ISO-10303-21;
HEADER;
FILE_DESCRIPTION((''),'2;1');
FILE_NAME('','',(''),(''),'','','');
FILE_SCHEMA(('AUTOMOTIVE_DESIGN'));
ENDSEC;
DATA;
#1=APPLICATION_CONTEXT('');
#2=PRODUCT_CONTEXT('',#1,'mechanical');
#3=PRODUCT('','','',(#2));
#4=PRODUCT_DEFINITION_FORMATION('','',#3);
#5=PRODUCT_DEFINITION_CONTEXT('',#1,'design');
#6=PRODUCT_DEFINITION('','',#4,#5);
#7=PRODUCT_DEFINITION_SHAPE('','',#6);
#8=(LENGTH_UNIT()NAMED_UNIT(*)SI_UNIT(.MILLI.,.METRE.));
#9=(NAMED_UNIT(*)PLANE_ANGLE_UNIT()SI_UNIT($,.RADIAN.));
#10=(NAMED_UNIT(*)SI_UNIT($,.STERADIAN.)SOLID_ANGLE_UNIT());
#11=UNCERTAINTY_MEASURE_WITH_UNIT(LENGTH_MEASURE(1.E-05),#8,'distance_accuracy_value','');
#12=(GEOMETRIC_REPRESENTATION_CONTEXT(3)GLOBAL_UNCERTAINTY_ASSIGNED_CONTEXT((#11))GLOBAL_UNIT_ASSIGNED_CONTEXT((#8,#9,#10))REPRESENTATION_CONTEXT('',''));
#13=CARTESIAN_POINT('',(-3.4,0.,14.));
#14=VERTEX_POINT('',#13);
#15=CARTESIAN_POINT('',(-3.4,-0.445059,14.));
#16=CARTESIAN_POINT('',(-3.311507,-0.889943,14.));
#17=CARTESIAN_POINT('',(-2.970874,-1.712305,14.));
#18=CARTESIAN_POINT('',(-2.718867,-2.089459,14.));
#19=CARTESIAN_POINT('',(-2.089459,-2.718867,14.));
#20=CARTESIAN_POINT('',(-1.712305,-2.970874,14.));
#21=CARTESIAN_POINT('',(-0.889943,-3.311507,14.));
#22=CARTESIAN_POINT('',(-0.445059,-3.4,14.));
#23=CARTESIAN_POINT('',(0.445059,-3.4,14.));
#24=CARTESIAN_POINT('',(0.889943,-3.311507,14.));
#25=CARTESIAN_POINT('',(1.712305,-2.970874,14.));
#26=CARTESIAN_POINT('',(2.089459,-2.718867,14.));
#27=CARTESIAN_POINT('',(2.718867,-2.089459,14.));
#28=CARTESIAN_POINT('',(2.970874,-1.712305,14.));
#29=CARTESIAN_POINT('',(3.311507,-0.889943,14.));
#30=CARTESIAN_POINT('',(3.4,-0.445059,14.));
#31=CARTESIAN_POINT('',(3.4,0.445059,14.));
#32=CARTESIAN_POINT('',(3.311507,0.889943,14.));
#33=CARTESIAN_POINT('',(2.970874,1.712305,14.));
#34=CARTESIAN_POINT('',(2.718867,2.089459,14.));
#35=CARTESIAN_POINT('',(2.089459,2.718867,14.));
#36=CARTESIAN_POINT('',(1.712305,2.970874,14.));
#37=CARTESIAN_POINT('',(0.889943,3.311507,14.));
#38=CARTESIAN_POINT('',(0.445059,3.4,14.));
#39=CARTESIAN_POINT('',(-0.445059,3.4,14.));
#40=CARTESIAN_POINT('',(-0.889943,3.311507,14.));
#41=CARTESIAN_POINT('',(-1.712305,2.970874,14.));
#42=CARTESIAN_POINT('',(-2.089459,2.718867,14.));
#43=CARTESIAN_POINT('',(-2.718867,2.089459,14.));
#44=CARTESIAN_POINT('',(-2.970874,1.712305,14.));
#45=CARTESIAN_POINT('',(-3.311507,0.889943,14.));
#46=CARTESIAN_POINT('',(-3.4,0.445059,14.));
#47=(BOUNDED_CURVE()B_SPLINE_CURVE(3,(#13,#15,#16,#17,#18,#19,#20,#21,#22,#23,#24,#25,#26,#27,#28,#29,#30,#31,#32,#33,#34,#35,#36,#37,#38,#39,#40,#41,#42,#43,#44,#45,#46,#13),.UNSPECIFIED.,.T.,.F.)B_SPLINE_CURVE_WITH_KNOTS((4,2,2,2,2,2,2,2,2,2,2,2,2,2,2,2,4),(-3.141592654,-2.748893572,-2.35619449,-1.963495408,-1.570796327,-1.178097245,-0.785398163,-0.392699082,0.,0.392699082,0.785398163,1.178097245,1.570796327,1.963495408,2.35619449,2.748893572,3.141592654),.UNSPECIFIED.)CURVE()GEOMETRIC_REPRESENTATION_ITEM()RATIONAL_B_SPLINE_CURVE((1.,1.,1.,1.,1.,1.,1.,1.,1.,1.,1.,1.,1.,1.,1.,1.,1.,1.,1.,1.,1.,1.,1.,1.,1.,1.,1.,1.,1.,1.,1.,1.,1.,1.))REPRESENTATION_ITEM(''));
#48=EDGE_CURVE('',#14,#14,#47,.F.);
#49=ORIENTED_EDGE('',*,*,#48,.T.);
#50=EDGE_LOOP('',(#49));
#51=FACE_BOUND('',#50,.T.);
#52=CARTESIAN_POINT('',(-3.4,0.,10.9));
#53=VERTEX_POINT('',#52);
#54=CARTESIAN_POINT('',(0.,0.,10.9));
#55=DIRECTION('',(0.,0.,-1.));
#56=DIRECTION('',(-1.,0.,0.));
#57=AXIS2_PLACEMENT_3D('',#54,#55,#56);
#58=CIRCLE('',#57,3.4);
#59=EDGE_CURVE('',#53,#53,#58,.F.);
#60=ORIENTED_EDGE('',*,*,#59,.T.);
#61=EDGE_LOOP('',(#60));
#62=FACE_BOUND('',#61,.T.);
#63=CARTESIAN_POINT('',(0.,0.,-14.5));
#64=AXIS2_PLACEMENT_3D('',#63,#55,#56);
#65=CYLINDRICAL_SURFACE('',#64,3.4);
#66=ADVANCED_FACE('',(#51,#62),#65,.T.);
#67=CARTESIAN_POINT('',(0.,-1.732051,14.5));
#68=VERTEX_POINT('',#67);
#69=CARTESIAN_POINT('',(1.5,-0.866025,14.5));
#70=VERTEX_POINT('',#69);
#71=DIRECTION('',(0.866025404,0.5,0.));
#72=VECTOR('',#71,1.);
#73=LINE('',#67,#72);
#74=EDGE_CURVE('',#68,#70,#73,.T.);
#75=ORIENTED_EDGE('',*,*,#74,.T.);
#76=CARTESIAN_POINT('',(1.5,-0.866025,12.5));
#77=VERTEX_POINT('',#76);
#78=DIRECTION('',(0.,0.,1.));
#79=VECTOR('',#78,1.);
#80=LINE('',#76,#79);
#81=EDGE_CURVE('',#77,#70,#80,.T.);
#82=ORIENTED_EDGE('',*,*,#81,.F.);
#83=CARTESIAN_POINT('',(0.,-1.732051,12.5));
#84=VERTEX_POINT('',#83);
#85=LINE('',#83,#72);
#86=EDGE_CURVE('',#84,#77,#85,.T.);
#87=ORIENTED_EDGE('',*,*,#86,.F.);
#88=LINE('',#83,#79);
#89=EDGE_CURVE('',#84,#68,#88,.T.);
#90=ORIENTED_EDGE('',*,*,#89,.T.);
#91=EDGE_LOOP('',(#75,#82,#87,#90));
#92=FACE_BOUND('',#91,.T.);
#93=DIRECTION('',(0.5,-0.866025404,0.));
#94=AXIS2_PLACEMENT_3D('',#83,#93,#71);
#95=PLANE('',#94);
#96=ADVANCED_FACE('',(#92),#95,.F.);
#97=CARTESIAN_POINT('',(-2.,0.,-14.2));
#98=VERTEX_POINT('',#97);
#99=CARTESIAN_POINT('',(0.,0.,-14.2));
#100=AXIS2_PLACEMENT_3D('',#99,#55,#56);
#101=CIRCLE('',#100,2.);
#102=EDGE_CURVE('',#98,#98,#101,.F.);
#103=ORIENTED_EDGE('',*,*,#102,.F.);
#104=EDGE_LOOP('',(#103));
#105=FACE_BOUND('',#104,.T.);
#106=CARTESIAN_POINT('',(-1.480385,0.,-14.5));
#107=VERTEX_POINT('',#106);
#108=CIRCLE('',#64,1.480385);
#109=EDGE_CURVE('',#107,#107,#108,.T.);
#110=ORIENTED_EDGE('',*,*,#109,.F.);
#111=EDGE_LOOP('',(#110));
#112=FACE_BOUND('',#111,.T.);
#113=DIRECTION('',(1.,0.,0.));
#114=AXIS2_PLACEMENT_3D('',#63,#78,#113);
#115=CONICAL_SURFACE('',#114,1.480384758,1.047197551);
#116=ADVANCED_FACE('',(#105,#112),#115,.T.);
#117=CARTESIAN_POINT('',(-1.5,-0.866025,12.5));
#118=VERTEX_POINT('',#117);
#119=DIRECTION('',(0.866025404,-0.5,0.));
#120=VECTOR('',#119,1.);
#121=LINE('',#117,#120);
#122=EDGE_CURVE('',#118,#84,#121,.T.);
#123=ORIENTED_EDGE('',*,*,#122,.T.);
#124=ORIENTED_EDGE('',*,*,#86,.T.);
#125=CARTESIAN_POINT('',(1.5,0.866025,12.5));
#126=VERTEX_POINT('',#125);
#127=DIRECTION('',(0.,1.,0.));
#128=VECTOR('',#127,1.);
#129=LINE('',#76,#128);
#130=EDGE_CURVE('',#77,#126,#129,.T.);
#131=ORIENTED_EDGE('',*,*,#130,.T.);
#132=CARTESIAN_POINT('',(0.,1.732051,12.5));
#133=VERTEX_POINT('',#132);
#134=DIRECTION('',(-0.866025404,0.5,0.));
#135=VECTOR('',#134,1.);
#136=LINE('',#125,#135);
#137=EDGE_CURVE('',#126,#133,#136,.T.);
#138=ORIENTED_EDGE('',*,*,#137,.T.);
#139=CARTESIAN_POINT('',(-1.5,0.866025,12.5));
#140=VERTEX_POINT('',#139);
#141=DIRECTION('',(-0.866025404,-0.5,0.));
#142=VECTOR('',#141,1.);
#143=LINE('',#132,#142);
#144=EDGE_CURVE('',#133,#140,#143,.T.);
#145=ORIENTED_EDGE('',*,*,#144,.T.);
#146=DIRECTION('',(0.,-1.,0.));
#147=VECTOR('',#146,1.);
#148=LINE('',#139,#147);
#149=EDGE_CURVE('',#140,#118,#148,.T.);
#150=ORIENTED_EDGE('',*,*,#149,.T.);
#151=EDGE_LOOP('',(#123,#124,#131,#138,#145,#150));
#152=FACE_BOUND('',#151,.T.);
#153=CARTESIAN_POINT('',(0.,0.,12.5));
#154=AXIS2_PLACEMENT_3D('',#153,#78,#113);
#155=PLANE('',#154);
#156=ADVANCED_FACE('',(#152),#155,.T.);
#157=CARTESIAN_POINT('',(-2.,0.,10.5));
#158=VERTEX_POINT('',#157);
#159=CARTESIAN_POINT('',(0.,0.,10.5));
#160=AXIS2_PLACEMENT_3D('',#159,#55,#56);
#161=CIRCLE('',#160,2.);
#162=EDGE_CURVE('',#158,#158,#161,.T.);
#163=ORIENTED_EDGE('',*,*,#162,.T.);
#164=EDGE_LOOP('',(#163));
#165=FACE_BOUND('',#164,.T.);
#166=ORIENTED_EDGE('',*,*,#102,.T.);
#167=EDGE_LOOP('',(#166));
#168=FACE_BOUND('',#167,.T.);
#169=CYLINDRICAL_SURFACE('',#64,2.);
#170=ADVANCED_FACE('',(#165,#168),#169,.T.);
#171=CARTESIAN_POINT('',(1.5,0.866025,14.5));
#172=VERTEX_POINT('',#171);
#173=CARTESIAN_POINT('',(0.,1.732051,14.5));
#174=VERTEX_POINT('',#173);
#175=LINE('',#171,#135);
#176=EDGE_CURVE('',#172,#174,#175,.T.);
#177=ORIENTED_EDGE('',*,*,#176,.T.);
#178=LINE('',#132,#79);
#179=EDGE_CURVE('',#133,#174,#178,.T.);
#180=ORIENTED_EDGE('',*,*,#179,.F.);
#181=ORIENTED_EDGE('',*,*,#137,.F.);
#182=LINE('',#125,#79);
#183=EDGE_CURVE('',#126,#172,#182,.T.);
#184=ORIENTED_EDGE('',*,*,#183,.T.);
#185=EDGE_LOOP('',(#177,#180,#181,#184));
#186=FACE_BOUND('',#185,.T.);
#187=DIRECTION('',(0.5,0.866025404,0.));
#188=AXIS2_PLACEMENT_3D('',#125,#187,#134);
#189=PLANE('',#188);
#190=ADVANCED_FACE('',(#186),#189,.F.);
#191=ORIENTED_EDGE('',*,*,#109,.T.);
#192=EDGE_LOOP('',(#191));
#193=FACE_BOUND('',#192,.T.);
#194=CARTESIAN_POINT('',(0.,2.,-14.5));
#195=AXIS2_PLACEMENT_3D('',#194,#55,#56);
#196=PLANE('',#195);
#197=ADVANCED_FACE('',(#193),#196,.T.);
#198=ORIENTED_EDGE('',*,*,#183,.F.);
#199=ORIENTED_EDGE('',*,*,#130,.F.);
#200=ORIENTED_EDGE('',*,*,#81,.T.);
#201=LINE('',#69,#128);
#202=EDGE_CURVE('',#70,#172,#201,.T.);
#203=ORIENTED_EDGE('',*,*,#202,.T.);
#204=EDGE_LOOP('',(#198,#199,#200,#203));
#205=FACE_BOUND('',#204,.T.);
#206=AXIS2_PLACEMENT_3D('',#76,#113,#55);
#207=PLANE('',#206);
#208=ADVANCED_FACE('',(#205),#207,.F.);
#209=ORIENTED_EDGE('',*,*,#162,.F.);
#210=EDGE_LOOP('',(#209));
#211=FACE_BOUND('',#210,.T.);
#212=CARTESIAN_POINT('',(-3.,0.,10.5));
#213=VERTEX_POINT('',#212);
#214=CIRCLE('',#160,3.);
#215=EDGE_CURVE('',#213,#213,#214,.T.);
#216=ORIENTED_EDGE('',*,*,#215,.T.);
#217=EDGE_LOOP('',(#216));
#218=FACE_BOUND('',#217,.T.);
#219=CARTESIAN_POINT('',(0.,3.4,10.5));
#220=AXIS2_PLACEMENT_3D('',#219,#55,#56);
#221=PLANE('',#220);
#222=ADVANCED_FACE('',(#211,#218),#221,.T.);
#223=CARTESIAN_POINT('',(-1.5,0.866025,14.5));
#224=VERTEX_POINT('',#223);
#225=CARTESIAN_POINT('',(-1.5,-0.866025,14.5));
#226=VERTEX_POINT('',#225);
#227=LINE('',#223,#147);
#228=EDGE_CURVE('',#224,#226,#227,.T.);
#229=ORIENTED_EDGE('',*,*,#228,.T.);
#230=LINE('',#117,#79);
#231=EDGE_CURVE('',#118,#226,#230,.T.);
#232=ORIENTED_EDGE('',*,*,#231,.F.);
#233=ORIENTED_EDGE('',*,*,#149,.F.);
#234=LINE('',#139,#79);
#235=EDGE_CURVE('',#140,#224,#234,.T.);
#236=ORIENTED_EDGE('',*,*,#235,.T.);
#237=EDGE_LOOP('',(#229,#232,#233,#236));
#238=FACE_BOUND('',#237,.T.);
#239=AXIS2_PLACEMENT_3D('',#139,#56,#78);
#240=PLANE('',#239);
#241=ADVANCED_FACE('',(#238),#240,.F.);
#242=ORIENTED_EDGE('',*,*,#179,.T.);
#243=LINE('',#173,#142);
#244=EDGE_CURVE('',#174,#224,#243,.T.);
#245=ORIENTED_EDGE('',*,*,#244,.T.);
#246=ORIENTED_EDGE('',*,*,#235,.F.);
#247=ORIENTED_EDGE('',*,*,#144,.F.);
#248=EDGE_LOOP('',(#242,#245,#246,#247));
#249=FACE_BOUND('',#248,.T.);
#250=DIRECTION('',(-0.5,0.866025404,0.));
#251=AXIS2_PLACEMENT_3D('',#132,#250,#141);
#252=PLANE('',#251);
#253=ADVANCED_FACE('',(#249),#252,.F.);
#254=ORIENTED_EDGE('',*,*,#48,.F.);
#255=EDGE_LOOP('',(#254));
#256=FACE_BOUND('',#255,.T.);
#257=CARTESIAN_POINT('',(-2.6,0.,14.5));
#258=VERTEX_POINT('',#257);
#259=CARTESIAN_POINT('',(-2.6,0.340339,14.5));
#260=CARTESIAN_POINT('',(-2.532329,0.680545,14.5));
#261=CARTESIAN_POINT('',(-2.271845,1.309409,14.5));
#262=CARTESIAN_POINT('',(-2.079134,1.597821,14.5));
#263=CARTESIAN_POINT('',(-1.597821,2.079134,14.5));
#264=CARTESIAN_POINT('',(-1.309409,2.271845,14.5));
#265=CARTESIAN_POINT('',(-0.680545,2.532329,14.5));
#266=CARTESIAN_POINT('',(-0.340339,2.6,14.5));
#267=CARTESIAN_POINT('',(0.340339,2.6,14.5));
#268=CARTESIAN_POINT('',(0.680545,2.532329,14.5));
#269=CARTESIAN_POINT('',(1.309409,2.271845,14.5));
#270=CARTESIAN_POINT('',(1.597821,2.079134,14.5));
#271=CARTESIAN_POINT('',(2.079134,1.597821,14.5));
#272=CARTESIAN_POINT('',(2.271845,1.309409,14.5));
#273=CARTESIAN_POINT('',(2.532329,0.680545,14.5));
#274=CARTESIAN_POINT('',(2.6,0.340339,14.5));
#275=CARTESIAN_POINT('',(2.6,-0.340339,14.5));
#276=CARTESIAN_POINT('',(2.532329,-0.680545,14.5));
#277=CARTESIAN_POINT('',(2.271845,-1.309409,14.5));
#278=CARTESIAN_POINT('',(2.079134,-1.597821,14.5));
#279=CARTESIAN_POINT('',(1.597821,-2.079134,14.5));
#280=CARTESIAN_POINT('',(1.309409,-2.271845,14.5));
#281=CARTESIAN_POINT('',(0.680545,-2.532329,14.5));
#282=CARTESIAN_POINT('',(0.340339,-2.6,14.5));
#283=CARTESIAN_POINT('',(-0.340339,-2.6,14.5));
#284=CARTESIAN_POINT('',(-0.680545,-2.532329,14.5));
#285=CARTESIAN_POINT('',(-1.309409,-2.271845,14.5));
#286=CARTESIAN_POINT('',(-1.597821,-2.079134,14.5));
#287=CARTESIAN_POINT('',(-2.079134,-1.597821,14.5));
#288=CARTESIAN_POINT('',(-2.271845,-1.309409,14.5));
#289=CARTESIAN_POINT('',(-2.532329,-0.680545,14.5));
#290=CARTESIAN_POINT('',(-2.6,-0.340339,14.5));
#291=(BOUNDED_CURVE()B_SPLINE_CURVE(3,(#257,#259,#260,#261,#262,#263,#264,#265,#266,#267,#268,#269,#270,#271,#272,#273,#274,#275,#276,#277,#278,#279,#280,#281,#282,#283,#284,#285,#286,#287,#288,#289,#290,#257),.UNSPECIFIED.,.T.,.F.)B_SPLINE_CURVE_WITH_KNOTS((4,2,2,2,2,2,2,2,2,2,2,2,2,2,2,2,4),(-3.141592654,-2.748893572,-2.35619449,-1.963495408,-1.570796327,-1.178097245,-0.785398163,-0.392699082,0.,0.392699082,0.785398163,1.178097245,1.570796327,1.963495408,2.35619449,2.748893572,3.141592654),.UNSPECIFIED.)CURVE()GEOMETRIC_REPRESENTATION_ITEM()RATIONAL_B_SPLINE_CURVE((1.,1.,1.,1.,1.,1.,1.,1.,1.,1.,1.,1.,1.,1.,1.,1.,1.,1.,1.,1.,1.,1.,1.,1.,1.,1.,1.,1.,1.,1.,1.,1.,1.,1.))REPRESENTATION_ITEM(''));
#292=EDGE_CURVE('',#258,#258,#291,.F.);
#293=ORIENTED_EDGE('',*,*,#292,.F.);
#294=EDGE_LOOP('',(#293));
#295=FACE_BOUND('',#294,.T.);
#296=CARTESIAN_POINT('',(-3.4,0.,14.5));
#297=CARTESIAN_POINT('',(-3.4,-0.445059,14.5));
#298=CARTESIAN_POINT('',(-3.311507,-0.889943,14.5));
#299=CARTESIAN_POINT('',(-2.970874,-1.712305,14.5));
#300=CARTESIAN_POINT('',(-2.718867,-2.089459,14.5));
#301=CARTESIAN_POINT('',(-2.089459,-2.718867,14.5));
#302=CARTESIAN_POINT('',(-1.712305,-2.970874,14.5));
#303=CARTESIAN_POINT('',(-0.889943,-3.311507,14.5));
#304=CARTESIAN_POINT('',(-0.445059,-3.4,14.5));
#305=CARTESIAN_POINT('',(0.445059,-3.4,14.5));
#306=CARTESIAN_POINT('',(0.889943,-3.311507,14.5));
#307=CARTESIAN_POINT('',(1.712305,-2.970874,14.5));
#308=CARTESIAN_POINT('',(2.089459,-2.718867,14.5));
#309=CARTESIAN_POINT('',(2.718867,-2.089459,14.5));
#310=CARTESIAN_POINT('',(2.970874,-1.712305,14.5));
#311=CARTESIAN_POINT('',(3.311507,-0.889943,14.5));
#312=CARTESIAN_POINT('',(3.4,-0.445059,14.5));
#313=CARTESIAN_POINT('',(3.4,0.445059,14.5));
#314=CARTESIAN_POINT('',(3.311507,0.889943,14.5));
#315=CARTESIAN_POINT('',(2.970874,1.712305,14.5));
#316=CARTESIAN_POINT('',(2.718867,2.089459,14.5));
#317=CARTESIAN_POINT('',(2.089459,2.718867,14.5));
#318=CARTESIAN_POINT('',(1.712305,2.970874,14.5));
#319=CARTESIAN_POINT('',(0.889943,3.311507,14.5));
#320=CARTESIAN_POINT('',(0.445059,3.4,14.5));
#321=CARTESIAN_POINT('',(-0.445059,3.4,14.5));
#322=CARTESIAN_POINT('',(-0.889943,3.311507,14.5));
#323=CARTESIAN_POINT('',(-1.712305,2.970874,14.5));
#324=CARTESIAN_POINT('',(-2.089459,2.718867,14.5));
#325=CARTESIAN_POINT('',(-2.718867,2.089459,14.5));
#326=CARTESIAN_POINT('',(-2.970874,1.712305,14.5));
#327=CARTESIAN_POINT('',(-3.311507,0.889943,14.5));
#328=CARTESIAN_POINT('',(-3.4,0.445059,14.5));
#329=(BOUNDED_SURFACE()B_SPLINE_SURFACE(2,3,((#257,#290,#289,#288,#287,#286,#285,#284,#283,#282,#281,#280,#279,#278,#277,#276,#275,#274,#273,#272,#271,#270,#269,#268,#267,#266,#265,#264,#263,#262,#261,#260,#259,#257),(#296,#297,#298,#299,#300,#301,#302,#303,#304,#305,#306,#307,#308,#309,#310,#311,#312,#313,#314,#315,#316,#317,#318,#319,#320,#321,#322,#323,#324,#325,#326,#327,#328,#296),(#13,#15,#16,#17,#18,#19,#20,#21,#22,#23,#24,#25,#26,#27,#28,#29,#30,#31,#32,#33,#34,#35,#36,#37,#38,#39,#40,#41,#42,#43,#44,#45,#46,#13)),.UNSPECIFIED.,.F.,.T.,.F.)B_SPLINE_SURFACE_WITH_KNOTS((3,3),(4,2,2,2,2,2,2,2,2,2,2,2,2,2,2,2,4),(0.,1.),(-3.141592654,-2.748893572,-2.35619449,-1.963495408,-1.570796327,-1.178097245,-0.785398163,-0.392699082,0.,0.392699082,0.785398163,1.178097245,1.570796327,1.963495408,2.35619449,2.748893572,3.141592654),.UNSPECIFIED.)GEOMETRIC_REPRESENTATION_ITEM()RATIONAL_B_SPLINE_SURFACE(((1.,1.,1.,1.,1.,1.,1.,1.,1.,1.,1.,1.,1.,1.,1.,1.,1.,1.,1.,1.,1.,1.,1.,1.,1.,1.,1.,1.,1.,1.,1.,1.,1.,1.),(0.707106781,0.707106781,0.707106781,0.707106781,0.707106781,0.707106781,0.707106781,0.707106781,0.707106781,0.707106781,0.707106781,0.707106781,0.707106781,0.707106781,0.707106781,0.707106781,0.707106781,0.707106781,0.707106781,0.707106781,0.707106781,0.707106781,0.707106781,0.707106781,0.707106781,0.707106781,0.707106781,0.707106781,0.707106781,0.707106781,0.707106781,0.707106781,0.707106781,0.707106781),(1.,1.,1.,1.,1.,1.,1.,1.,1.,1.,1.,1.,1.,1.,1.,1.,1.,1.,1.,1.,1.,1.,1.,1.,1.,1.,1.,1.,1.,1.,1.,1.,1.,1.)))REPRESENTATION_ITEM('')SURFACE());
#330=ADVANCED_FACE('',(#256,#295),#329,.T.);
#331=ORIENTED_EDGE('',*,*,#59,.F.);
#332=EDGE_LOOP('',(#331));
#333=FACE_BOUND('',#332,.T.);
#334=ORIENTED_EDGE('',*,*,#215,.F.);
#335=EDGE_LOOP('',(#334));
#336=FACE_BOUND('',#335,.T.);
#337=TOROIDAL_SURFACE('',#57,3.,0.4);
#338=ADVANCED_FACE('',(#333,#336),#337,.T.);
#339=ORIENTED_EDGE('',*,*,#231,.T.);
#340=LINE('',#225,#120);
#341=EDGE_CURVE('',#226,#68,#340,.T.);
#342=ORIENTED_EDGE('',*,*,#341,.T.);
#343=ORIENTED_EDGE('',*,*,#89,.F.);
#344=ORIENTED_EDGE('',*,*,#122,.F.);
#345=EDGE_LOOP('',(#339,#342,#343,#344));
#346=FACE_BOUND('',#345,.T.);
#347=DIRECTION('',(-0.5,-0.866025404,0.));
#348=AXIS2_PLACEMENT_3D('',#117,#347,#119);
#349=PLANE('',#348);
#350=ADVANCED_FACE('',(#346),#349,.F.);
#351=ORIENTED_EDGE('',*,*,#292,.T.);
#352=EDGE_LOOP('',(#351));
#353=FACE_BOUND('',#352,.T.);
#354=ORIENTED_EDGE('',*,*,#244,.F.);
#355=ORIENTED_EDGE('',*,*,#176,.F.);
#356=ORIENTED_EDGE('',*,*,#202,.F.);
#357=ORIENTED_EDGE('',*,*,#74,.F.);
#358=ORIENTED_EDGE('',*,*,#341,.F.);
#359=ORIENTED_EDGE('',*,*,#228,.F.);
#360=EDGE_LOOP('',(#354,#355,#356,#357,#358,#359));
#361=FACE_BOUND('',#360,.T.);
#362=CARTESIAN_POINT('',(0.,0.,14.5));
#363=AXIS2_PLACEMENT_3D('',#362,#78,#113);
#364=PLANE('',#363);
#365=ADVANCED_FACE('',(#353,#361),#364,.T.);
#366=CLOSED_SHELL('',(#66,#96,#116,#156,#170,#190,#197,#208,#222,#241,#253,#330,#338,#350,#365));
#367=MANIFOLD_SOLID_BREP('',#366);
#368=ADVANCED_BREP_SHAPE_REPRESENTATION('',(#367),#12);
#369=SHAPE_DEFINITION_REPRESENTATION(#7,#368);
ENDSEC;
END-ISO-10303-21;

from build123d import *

# Parameters (mm, degrees)
CHAMFER_1_SIZE      = 0.3
CHAMFER_1_SIZE2     = 0.519615242
FILLET_1_R          = 0.4
FILLET_2_SIZE       = 0.5
FILLET_2_SIZE_2     = 0.8
CUT_EXTRUDE_1_DEPTH = 2


with BuildPart() as part:
    # 草图2 → 旋转1 (revolve)
    with BuildSketch(Plane(origin=(0, 0, 0), x_dir=(0, 0, -1), z_dir=(1, 0, 0)), mode=Mode.PRIVATE) as revolve_1_sk:
        Polygon((-14.5, 0), (-14.5, 3.4), (-10.5, 3.4), (-10.5, 2), (14.5, 2), (14.5, 0), align=None)
    revolve(revolve_1_sk.sketch.rotate(Axis((0, 0, -14.5), (0, 0, 1)), 90), axis=Axis((0, 0, -14.5), (0, 0, 1)))

    # 倒角1
    chamfer_1_edges = [part.edges().sort_by_distance(p)[0] for p in [
        (2, 0, -14.5),
    ]]
    chamfer_1_side = [part.faces().sort_by_distance(p)[0] for p in [
        (2, 0, -2),
    ]]
    chamfer(chamfer_1_edges, length=CHAMFER_1_SIZE, length2=CHAMFER_1_SIZE2, reference=chamfer_1_side[0])

    # 圆角1
    fillet_1_edges = [part.edges().sort_by_distance(p)[0] for p in [
        (3.4, 0, 10.5),
    ]]
    fillet(fillet_1_edges, radius=FILLET_1_R)

    # 圆角2
    # an asymmetric fillet: 0.8, 0.5 mm, written as the material it takes off along each edge
    with BuildSketch(Plane(origin=(0, 0, 14.5), x_dir=(-1, 0, 0), z_dir=(0, 1, 0))) as fillet_2_piece_1:
        with BuildLine():
            Bezier((3.4, -FILLET_2_SIZE), (3.4, 0), (3.4 - FILLET_2_SIZE_2, 0), weights=[1, 0.707106781, 1])
            Line((3.4 - FILLET_2_SIZE_2, 0), (3.4, 0))
            Line((3.4, 0), (3.4, -FILLET_2_SIZE))
        make_face()
    revolve(axis=Axis((0, 0, 14.5), (0, 0, 1)), mode=Mode.SUBTRACT)

    # 草图3 → 切除-拉伸1 (cut)
    with BuildSketch(Plane.XY.offset(14.5)):
        Polygon((0, 1.732050808), (-1.5, 0.866025404), (-1.5, -0.866025404), (0, -1.732050808), (1.5, -0.866025404), (1.5, 0.866025404), align=None)
    extrude(amount=-CUT_EXTRUDE_1_DEPTH, mode=Mode.SUBTRACT)


solid = part.part
